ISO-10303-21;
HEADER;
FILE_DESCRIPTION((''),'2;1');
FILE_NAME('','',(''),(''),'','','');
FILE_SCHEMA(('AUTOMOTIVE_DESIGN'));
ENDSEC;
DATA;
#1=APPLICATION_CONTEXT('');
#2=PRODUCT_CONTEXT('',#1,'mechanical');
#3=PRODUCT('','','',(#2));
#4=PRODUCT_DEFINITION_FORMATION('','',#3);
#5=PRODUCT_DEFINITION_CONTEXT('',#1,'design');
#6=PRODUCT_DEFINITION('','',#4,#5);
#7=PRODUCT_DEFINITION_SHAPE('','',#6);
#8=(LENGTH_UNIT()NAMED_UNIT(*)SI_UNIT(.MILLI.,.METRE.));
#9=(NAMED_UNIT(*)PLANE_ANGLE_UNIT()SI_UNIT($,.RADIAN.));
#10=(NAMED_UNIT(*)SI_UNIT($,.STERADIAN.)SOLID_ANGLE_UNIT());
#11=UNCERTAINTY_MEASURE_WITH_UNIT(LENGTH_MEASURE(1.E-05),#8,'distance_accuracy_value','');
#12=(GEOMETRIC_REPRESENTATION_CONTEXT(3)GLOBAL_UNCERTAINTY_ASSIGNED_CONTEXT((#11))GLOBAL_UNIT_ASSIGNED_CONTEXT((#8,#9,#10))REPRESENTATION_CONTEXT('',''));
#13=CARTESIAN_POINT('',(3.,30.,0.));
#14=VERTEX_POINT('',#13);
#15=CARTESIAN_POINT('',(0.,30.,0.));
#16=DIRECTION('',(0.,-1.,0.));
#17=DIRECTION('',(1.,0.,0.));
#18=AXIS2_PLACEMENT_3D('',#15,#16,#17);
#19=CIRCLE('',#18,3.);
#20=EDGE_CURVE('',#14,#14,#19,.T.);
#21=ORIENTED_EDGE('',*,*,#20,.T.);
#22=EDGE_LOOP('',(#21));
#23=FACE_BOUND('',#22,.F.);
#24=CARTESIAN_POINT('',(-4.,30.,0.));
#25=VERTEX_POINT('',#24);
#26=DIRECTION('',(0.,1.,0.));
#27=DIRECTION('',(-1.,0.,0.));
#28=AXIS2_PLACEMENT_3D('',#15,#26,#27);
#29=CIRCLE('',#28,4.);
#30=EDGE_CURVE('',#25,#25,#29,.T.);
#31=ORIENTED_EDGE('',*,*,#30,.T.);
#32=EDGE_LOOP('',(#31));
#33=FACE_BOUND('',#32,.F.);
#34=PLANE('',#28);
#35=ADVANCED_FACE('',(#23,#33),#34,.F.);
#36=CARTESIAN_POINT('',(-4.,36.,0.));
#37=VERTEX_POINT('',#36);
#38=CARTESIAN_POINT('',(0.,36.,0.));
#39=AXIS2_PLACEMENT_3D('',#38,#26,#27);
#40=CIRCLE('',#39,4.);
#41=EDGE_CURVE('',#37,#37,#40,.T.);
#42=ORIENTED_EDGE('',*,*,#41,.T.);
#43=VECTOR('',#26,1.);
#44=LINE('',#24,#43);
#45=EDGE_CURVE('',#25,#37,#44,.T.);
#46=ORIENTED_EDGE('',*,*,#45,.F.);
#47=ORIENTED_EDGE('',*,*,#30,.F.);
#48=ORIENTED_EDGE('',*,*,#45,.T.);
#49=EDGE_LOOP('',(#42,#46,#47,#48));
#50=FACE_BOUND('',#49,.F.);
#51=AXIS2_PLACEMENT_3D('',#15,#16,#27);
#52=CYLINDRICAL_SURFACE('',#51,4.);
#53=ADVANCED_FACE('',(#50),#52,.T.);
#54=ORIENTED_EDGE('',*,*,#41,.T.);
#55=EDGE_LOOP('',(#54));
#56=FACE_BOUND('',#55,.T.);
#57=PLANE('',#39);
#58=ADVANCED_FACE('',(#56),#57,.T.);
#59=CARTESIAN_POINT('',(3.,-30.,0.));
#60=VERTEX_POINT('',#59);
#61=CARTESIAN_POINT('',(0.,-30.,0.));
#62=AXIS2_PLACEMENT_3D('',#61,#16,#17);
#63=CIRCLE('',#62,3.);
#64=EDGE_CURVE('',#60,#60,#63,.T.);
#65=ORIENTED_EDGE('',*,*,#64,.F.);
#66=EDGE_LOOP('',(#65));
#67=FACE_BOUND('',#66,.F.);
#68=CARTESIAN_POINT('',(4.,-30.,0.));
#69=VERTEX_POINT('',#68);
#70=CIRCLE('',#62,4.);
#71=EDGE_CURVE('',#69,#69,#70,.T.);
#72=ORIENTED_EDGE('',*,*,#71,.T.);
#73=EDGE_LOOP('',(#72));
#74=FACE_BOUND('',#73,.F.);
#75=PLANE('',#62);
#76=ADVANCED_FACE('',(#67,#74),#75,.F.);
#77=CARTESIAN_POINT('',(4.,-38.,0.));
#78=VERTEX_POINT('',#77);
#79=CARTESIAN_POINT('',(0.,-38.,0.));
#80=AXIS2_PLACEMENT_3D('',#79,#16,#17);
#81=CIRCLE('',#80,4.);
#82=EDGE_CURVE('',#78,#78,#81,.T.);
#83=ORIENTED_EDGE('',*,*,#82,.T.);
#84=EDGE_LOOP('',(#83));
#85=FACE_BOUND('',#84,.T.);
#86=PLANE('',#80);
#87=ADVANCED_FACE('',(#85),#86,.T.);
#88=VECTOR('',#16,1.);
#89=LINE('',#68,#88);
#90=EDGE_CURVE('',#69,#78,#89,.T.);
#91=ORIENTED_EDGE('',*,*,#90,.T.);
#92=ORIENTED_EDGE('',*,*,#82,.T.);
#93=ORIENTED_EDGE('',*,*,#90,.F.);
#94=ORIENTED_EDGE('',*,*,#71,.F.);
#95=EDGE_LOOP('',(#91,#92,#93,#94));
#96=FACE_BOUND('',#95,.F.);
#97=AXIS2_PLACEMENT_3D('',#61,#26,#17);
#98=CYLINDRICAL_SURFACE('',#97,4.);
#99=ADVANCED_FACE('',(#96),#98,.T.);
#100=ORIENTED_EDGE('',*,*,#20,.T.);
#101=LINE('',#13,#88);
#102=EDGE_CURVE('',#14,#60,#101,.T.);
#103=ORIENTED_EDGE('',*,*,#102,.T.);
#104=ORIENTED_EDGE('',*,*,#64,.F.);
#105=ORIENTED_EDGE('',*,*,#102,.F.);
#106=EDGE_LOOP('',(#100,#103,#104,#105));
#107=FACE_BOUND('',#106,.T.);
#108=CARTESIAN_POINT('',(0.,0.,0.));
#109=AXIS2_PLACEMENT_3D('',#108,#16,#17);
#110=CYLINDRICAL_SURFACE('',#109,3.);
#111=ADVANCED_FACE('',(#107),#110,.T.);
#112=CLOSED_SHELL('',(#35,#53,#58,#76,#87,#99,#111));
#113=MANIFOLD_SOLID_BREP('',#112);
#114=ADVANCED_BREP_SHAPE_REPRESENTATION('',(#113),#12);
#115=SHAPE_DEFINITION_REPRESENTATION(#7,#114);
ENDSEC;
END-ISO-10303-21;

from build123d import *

# Parameters (mm, degrees)
F0_R     = 3
F1_DEPTH = 30
F3_R     = 4
F3_R_2   = 3
F4_DEPTH = 6
F2_R     = 4
F2_R_2   = 3
F5_DEPTH = 8


with BuildPart() as f1:
    # F0 (on Front) → F1 (new body, symmetric)
    with BuildSketch(Plane.XZ):
        Circle(F0_R)
    extrude(amount=F1_DEPTH, both=True)

    # F3 (on face) → F4 (join)
    with BuildSketch(Plane(origin=(0, 30, 0), x_dir=(-1, 0, 0), z_dir=(0, 1, 0))):
        Circle(F3_R)
        Circle(F3_R_2, mode=Mode.SUBTRACT)
        Circle(F3_R_2)
    extrude(amount=F4_DEPTH)

    # F2 (on face) → F5 (join)
    with BuildSketch(Plane.XZ.offset(30)):
        Circle(F2_R)
        Circle(F2_R_2, mode=Mode.SUBTRACT)
        Circle(F2_R_2)
    extrude(amount=F5_DEPTH)


solid = f1.part
